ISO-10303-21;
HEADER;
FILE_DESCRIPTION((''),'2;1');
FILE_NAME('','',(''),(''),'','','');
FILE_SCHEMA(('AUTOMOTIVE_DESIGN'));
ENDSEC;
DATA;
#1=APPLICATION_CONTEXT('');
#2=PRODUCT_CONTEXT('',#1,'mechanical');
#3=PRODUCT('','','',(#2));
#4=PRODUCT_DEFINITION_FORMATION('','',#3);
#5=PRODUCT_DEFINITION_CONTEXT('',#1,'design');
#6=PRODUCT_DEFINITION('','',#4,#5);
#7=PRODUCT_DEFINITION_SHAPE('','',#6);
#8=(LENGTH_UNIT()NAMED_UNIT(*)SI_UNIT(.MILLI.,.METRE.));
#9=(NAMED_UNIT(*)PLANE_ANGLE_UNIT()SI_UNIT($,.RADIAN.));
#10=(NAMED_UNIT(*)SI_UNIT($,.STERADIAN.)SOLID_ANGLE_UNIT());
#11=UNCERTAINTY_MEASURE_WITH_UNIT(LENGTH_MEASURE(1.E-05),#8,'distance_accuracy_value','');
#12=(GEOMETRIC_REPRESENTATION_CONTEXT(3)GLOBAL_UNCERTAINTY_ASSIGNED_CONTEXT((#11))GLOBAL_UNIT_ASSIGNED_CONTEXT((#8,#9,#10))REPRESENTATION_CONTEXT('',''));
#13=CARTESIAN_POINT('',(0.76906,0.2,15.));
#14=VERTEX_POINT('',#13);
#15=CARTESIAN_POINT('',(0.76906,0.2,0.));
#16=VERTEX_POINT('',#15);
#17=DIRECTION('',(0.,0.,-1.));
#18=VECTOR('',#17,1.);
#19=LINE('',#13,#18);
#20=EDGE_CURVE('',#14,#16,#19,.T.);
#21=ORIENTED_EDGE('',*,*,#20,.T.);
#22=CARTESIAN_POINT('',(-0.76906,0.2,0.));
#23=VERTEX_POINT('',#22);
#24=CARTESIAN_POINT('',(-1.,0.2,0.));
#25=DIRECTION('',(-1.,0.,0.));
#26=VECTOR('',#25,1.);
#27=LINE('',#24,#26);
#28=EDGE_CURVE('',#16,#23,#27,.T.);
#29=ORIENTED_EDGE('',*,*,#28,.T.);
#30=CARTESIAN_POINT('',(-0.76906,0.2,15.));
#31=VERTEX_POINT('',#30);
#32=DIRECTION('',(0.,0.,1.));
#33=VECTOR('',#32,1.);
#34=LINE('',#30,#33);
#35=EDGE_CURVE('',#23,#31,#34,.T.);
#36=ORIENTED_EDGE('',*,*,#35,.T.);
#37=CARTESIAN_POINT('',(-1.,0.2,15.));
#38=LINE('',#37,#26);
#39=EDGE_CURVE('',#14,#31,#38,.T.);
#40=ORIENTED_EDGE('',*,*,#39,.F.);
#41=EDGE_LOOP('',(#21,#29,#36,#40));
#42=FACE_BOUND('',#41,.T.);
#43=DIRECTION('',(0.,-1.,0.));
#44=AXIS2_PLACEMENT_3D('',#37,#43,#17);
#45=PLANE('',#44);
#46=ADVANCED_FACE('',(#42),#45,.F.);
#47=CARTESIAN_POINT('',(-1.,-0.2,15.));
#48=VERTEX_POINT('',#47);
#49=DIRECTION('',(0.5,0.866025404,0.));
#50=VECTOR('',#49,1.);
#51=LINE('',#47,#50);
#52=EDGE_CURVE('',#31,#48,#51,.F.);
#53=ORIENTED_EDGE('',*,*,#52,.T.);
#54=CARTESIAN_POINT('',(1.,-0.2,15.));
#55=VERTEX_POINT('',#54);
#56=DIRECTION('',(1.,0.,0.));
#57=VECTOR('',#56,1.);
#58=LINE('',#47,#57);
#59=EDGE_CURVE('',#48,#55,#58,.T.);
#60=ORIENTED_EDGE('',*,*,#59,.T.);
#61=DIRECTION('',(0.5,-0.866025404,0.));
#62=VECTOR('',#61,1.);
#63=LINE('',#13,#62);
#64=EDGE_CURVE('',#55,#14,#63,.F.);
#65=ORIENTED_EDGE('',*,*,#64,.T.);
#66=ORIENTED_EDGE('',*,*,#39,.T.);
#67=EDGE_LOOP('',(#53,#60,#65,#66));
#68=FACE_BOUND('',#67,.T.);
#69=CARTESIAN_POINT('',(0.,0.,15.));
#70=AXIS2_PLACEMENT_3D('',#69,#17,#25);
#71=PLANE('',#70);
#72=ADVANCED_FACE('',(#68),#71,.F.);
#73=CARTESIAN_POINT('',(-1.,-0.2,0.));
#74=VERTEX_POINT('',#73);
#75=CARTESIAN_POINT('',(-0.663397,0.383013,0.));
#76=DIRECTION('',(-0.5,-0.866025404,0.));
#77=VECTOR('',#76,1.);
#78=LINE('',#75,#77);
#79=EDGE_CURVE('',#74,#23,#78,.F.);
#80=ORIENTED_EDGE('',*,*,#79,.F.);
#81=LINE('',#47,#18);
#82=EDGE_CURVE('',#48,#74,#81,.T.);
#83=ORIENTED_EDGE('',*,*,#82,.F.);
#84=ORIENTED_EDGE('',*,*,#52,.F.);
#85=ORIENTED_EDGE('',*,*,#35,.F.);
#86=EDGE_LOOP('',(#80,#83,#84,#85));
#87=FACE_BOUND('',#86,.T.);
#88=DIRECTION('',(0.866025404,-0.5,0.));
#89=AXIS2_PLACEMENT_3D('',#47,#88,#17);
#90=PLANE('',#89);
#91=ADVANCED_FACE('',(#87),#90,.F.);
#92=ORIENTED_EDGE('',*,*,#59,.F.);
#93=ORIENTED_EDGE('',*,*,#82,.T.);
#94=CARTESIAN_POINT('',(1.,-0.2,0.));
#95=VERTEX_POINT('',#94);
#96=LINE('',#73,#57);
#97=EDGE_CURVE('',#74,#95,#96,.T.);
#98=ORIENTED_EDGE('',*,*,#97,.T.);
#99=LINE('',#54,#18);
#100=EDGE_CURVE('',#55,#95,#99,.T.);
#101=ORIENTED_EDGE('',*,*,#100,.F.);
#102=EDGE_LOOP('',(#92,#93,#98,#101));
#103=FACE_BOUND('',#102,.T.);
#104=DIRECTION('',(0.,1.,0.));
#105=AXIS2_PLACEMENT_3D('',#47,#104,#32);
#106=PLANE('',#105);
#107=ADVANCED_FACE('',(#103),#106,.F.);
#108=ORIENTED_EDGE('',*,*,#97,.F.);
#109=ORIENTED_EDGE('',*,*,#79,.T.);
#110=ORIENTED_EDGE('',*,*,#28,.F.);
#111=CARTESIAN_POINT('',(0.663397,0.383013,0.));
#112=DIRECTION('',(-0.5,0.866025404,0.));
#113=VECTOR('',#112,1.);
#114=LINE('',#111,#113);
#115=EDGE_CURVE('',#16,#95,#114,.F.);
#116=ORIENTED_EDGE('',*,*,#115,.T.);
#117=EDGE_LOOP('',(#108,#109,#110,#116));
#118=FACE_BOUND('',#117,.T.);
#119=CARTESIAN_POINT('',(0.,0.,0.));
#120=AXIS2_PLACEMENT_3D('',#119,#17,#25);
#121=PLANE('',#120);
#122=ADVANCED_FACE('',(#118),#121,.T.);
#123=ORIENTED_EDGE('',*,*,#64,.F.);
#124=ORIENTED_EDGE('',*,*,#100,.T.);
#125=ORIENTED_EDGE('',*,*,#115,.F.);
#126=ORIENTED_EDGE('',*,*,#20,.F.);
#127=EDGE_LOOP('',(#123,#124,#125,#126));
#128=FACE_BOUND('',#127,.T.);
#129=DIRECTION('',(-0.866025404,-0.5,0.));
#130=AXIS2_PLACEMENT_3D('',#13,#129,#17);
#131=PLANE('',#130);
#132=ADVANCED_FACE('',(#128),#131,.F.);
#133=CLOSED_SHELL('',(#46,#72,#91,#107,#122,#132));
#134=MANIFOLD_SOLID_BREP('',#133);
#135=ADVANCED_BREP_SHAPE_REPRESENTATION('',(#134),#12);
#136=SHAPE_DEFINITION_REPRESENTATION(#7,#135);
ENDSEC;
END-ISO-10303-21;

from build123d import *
from OCP.BRepFilletAPI import BRepFilletAPI_MakeChamfer

# Parameters (mm, degrees)
SKETCH1_W           = 2
SKETCH1_H           = 0.4
BOSS_EXTRUDE1_DEPTH = 15
CHAMFER1_SIZE       = 0.230940108
CHAMFER1_SIZE_2     = 0.4


with BuildPart() as part:
    # Sketch1 → Boss-Extrude1 (new body)
    with BuildSketch(Plane.XY):
        Rectangle(SKETCH1_W, SKETCH1_H)
    extrude(amount=BOSS_EXTRUDE1_DEPTH)

    # Chamfer1
    chamfer1_edges_1 = [part.edges().sort_by_distance(p)[0] for p in [
        (-1, 0.2, 7.5),
    ]]
    chamfer1_side_1 = [part.faces().sort_by_distance(p)[0] for p in [
        (-0.995381198, 0.2, 7.5),
    ]]
    chamfer1_edges_2 = [part.edges().sort_by_distance(p)[0] for p in [
        (1, 0.2, 7.5),
    ]]
    chamfer1_side_2 = [part.faces().sort_by_distance(p)[0] for p in [
        (1, 0.195381198, 7.5),
    ]]
    chamfer1 = BRepFilletAPI_MakeChamfer(part.part.solid().wrapped)
    for e in chamfer1_edges_1:
        chamfer1.Add(CHAMFER1_SIZE - 0.0001, CHAMFER1_SIZE_2 - 0.0001, e.wrapped, chamfer1_side_1[0].wrapped)
    for e in chamfer1_edges_2:
        chamfer1.Add(CHAMFER1_SIZE_2 - 0.0001, CHAMFER1_SIZE - 0.0001, e.wrapped, chamfer1_side_2[0].wrapped)
    add(Compound.cast(chamfer1.Shape()), mode=Mode.REPLACE)  # a hair under: the kernel refuses the full size


solid = part.part
